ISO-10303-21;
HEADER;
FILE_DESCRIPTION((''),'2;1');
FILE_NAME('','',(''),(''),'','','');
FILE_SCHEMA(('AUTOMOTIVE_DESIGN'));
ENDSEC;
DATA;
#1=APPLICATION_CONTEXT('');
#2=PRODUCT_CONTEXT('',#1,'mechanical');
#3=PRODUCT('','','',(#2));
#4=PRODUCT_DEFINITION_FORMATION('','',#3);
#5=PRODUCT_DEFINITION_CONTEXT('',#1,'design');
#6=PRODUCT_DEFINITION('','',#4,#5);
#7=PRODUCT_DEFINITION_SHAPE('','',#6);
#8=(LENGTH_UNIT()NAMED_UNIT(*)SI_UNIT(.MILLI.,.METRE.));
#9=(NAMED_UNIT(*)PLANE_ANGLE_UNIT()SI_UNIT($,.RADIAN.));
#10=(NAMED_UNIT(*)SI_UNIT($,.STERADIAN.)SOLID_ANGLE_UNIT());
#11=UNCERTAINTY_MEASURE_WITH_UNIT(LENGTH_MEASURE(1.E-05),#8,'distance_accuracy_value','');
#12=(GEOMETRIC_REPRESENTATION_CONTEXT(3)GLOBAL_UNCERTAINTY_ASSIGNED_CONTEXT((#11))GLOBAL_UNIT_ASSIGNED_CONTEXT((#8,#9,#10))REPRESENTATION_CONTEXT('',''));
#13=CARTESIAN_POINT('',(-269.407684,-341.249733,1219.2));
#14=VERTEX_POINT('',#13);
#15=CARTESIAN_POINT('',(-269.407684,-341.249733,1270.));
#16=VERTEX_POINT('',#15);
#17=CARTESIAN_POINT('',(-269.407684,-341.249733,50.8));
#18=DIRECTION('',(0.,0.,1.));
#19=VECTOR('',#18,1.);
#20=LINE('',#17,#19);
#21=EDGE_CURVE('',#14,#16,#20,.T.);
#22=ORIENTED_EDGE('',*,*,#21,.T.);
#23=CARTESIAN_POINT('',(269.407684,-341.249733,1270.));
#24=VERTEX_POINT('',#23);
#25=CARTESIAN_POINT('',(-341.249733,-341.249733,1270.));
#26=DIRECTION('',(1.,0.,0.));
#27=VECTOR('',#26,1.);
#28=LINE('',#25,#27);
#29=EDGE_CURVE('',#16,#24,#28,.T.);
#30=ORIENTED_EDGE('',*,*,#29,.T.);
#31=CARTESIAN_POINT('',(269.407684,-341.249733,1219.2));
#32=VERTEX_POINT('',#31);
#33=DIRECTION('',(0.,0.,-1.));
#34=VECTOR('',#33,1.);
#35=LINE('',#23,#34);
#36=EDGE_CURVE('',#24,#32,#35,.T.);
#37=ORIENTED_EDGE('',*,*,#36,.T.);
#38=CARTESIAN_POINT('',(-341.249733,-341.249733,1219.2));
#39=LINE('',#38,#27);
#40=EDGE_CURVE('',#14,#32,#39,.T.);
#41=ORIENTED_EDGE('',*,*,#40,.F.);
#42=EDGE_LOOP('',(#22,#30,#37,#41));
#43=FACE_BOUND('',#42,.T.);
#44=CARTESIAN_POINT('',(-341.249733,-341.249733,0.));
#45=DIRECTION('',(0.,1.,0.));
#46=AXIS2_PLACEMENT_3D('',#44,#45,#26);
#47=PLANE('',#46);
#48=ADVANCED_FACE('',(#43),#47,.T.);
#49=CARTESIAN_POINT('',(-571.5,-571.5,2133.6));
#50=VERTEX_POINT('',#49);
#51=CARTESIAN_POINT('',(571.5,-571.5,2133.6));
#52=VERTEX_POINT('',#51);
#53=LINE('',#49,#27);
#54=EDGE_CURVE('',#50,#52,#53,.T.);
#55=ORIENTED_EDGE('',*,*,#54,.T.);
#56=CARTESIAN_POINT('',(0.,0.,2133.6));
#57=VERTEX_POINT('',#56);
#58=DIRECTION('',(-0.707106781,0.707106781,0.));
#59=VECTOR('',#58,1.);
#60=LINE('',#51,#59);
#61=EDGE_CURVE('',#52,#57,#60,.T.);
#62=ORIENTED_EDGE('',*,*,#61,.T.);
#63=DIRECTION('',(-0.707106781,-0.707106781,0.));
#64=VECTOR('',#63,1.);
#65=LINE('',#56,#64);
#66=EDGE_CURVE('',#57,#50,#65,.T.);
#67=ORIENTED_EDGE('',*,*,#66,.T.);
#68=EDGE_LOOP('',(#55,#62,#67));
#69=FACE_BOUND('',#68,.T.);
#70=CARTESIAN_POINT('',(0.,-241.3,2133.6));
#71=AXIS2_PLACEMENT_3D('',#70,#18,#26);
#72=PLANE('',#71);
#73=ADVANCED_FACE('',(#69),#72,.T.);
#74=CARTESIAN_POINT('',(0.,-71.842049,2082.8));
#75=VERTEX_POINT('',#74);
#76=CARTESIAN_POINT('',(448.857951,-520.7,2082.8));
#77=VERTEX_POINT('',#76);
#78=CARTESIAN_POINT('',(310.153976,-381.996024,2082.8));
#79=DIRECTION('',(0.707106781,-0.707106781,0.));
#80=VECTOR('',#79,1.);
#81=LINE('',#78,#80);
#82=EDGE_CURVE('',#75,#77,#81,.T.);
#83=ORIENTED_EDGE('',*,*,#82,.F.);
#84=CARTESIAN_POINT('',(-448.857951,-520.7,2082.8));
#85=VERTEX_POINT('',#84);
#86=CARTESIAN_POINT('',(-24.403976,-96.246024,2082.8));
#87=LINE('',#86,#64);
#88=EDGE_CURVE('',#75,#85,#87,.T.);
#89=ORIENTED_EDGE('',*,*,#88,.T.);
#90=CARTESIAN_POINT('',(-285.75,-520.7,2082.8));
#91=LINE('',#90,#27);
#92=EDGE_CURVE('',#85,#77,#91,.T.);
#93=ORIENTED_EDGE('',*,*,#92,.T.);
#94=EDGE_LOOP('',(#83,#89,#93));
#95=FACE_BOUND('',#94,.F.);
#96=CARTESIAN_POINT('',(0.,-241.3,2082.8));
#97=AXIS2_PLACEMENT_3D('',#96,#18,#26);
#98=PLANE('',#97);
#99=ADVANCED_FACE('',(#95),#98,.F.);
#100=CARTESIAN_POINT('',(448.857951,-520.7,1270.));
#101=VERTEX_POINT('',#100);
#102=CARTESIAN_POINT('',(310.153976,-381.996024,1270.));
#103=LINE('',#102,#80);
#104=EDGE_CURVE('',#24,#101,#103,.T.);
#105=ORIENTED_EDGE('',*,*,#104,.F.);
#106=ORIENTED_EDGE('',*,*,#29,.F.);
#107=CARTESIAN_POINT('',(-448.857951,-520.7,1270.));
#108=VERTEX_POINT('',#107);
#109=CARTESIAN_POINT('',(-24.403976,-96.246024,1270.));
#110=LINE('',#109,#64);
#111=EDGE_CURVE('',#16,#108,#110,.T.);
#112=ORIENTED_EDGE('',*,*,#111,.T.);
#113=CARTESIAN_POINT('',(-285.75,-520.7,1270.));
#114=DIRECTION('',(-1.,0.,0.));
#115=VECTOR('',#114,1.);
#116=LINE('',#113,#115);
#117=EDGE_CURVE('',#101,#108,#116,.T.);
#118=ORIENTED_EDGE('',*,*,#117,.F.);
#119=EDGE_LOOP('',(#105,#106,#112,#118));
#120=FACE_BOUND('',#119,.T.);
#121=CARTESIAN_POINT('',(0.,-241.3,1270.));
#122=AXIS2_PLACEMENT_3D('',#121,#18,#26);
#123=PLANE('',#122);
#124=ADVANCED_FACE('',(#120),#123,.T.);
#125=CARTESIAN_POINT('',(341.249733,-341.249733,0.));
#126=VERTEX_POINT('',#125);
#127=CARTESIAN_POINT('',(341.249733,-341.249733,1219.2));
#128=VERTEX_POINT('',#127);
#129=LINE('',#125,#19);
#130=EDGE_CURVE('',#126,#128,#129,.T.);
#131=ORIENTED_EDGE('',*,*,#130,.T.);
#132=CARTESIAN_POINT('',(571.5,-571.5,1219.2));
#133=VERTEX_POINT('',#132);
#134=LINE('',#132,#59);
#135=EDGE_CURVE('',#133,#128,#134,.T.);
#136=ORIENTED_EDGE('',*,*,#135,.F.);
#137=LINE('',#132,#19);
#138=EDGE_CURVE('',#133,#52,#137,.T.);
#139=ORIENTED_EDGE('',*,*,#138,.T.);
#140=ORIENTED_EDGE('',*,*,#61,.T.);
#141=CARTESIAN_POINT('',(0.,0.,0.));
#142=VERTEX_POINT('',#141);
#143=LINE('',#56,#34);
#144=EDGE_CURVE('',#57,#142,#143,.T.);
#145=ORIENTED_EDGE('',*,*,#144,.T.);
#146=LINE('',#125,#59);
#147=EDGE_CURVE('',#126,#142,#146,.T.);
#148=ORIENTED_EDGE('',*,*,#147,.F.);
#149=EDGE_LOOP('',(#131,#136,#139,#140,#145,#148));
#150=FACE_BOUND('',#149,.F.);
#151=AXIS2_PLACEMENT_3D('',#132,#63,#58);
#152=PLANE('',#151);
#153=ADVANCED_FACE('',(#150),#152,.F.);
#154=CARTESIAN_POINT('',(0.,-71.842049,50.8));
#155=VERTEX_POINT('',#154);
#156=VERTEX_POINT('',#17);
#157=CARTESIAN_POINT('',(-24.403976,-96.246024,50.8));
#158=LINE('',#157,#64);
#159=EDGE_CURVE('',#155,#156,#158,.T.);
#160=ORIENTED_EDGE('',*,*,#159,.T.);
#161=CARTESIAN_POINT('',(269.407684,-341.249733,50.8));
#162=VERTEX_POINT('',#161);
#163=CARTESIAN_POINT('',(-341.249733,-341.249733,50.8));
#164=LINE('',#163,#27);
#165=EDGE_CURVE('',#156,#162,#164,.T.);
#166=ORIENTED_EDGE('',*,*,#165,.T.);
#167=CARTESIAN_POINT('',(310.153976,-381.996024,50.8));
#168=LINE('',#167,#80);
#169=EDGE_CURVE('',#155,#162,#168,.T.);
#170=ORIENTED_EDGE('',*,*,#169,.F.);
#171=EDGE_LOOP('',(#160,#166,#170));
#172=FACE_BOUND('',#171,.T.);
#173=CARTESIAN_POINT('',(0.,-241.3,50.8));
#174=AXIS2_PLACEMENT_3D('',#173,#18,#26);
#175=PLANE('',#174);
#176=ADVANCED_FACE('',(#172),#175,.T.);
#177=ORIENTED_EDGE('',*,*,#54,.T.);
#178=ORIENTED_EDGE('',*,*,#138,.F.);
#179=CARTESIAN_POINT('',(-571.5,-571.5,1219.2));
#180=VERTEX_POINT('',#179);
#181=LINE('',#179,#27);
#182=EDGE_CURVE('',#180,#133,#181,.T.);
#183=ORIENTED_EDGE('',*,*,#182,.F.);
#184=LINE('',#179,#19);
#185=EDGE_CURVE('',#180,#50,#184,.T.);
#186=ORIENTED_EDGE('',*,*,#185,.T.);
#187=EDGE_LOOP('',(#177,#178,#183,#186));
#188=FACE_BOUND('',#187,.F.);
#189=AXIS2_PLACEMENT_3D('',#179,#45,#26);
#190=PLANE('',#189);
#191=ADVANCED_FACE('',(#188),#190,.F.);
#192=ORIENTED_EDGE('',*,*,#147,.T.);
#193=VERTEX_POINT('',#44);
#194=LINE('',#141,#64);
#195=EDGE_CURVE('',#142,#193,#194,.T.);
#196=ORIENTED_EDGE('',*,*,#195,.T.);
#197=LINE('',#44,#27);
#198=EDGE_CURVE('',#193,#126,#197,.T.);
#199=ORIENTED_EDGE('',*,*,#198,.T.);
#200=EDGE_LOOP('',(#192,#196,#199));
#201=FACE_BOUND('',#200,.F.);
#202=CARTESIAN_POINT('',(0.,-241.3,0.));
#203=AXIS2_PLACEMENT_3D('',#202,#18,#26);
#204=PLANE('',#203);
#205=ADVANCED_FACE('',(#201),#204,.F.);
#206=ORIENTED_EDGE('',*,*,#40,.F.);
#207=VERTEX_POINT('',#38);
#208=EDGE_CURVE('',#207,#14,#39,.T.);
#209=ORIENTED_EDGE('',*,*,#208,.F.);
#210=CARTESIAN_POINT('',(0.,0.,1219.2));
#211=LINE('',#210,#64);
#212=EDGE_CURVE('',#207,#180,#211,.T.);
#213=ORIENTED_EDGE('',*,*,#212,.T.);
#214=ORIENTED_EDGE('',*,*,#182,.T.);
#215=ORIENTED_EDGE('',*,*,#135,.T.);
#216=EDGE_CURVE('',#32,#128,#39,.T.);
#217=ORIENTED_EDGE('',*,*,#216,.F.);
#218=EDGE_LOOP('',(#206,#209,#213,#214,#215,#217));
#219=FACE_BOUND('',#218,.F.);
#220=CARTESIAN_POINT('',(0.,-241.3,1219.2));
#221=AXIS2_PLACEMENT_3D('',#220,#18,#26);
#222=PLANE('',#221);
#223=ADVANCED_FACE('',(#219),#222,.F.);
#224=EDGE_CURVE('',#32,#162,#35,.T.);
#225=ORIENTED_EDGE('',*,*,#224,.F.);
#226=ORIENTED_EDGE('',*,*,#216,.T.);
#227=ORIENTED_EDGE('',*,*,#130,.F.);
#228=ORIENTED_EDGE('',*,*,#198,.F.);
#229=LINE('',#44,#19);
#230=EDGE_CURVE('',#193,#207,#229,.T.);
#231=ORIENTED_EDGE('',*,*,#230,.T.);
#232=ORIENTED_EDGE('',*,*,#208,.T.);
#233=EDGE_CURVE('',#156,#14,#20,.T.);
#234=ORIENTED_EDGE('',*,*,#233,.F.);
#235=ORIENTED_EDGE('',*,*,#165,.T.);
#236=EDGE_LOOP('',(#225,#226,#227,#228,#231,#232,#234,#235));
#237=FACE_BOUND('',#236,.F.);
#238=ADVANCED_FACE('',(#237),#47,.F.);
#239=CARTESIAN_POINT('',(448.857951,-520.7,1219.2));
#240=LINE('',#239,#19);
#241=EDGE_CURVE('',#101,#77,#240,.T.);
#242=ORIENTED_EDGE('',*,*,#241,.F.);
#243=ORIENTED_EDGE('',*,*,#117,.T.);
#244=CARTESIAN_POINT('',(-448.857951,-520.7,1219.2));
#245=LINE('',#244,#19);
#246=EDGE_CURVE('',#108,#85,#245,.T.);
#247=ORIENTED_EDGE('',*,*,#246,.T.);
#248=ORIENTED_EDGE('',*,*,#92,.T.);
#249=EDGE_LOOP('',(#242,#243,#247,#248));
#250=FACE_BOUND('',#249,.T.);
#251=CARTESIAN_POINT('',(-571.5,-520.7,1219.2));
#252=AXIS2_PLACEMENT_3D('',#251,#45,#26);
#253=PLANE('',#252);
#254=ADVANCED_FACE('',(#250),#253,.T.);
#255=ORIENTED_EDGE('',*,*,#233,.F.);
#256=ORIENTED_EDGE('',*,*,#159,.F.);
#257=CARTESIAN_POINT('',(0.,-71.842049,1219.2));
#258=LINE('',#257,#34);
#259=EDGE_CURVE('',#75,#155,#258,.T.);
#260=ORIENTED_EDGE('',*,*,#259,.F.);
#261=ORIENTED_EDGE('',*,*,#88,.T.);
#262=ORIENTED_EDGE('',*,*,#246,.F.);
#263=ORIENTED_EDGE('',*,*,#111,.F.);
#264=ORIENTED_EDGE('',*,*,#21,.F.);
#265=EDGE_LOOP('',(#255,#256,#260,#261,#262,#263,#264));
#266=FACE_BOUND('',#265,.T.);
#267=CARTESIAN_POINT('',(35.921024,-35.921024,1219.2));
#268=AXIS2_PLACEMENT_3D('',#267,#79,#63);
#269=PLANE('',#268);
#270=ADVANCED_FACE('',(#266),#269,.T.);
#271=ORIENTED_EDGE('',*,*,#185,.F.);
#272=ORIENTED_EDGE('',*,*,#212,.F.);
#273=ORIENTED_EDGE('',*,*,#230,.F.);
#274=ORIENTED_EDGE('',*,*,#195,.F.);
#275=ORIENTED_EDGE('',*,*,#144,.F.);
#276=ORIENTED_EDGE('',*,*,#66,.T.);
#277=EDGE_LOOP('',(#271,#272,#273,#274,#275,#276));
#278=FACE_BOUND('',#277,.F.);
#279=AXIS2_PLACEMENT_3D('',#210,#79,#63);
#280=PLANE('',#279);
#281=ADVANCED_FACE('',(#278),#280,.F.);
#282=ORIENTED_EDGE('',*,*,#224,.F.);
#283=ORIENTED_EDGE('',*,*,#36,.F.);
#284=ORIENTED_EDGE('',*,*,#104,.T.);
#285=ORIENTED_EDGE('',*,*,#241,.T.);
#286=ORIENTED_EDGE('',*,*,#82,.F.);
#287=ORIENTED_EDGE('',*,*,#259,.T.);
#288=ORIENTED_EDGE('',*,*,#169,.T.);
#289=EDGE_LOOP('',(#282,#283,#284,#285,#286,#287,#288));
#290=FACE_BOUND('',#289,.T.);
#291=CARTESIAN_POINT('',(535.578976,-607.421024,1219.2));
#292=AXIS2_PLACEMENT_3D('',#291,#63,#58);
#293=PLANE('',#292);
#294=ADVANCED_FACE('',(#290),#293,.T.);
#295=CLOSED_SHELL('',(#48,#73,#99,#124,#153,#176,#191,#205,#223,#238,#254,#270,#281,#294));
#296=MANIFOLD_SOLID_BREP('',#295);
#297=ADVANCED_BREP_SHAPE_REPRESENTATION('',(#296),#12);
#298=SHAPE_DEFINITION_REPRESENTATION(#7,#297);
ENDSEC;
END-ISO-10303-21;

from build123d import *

# Parameters (mm, degrees)
F1_DEPTH = 1219.2
F3_DEPTH = 914.4
F4_T     = 50.8


# Not quite as in the source:
# - a shell that OpenCascade refuses in one call is made with other operations: the cavity is built on its own and cut out


with BuildPart() as f1:
    # F0 (on Top) → F1 (new body)
    with BuildSketch(Plane.XY):
        Polygon((0, 0), (-341.2497326006, -341.2497326006), (341.2497326006, -341.2497326006), align=None)
    extrude(amount=F1_DEPTH)

    # F2 (on face) → F3 (join)
    with BuildSketch(Plane.XY.offset(1219.2)):
        Polygon((341.2497326006, -341.2497326006), (0, 0), (-341.2497326006, -341.2497326006), align=None)
        Polygon((341.2497326006, -341.2497326006), (-341.2497326006, -341.2497326006), (-571.5, -571.5), (571.5, -571.5), align=None)
    extrude(amount=F3_DEPTH)

    # F4: shell of thickness 50.8, made by hand


with BuildPart() as f4_core1:
    # F4_t2: copy of F1
    add(f1.part)

    # the walls: a layer under each face that stays
    f4_faces = [f4_core1.faces().sort_by_distance(p)[0] for p in [
        (-285.75, -285.75, 1066.8),
        (0, -170.6248663003, 0),
        (0, -456.3748663003, 1219.2),
        (0, -571.5, 1676.4),
        (0, -285.75, 2133.6),
        (285.75, -285.75, 1066.8),
    ]]
    thicken(f4_faces, amount=-F4_T, mode=Mode.SUBTRACT)


with BuildPart() as f1_1:
    add(f1.part)

    # what is left inside the walls is the cavity
    f4_cavity = [f4_core1.part.solids().sort_by_distance(p)[0] for p in [
        (-224.069765, -296.630235, 1405.466667),
    ]]
    add(f4_cavity, mode=Mode.SUBTRACT)


solid = f1_1.part
